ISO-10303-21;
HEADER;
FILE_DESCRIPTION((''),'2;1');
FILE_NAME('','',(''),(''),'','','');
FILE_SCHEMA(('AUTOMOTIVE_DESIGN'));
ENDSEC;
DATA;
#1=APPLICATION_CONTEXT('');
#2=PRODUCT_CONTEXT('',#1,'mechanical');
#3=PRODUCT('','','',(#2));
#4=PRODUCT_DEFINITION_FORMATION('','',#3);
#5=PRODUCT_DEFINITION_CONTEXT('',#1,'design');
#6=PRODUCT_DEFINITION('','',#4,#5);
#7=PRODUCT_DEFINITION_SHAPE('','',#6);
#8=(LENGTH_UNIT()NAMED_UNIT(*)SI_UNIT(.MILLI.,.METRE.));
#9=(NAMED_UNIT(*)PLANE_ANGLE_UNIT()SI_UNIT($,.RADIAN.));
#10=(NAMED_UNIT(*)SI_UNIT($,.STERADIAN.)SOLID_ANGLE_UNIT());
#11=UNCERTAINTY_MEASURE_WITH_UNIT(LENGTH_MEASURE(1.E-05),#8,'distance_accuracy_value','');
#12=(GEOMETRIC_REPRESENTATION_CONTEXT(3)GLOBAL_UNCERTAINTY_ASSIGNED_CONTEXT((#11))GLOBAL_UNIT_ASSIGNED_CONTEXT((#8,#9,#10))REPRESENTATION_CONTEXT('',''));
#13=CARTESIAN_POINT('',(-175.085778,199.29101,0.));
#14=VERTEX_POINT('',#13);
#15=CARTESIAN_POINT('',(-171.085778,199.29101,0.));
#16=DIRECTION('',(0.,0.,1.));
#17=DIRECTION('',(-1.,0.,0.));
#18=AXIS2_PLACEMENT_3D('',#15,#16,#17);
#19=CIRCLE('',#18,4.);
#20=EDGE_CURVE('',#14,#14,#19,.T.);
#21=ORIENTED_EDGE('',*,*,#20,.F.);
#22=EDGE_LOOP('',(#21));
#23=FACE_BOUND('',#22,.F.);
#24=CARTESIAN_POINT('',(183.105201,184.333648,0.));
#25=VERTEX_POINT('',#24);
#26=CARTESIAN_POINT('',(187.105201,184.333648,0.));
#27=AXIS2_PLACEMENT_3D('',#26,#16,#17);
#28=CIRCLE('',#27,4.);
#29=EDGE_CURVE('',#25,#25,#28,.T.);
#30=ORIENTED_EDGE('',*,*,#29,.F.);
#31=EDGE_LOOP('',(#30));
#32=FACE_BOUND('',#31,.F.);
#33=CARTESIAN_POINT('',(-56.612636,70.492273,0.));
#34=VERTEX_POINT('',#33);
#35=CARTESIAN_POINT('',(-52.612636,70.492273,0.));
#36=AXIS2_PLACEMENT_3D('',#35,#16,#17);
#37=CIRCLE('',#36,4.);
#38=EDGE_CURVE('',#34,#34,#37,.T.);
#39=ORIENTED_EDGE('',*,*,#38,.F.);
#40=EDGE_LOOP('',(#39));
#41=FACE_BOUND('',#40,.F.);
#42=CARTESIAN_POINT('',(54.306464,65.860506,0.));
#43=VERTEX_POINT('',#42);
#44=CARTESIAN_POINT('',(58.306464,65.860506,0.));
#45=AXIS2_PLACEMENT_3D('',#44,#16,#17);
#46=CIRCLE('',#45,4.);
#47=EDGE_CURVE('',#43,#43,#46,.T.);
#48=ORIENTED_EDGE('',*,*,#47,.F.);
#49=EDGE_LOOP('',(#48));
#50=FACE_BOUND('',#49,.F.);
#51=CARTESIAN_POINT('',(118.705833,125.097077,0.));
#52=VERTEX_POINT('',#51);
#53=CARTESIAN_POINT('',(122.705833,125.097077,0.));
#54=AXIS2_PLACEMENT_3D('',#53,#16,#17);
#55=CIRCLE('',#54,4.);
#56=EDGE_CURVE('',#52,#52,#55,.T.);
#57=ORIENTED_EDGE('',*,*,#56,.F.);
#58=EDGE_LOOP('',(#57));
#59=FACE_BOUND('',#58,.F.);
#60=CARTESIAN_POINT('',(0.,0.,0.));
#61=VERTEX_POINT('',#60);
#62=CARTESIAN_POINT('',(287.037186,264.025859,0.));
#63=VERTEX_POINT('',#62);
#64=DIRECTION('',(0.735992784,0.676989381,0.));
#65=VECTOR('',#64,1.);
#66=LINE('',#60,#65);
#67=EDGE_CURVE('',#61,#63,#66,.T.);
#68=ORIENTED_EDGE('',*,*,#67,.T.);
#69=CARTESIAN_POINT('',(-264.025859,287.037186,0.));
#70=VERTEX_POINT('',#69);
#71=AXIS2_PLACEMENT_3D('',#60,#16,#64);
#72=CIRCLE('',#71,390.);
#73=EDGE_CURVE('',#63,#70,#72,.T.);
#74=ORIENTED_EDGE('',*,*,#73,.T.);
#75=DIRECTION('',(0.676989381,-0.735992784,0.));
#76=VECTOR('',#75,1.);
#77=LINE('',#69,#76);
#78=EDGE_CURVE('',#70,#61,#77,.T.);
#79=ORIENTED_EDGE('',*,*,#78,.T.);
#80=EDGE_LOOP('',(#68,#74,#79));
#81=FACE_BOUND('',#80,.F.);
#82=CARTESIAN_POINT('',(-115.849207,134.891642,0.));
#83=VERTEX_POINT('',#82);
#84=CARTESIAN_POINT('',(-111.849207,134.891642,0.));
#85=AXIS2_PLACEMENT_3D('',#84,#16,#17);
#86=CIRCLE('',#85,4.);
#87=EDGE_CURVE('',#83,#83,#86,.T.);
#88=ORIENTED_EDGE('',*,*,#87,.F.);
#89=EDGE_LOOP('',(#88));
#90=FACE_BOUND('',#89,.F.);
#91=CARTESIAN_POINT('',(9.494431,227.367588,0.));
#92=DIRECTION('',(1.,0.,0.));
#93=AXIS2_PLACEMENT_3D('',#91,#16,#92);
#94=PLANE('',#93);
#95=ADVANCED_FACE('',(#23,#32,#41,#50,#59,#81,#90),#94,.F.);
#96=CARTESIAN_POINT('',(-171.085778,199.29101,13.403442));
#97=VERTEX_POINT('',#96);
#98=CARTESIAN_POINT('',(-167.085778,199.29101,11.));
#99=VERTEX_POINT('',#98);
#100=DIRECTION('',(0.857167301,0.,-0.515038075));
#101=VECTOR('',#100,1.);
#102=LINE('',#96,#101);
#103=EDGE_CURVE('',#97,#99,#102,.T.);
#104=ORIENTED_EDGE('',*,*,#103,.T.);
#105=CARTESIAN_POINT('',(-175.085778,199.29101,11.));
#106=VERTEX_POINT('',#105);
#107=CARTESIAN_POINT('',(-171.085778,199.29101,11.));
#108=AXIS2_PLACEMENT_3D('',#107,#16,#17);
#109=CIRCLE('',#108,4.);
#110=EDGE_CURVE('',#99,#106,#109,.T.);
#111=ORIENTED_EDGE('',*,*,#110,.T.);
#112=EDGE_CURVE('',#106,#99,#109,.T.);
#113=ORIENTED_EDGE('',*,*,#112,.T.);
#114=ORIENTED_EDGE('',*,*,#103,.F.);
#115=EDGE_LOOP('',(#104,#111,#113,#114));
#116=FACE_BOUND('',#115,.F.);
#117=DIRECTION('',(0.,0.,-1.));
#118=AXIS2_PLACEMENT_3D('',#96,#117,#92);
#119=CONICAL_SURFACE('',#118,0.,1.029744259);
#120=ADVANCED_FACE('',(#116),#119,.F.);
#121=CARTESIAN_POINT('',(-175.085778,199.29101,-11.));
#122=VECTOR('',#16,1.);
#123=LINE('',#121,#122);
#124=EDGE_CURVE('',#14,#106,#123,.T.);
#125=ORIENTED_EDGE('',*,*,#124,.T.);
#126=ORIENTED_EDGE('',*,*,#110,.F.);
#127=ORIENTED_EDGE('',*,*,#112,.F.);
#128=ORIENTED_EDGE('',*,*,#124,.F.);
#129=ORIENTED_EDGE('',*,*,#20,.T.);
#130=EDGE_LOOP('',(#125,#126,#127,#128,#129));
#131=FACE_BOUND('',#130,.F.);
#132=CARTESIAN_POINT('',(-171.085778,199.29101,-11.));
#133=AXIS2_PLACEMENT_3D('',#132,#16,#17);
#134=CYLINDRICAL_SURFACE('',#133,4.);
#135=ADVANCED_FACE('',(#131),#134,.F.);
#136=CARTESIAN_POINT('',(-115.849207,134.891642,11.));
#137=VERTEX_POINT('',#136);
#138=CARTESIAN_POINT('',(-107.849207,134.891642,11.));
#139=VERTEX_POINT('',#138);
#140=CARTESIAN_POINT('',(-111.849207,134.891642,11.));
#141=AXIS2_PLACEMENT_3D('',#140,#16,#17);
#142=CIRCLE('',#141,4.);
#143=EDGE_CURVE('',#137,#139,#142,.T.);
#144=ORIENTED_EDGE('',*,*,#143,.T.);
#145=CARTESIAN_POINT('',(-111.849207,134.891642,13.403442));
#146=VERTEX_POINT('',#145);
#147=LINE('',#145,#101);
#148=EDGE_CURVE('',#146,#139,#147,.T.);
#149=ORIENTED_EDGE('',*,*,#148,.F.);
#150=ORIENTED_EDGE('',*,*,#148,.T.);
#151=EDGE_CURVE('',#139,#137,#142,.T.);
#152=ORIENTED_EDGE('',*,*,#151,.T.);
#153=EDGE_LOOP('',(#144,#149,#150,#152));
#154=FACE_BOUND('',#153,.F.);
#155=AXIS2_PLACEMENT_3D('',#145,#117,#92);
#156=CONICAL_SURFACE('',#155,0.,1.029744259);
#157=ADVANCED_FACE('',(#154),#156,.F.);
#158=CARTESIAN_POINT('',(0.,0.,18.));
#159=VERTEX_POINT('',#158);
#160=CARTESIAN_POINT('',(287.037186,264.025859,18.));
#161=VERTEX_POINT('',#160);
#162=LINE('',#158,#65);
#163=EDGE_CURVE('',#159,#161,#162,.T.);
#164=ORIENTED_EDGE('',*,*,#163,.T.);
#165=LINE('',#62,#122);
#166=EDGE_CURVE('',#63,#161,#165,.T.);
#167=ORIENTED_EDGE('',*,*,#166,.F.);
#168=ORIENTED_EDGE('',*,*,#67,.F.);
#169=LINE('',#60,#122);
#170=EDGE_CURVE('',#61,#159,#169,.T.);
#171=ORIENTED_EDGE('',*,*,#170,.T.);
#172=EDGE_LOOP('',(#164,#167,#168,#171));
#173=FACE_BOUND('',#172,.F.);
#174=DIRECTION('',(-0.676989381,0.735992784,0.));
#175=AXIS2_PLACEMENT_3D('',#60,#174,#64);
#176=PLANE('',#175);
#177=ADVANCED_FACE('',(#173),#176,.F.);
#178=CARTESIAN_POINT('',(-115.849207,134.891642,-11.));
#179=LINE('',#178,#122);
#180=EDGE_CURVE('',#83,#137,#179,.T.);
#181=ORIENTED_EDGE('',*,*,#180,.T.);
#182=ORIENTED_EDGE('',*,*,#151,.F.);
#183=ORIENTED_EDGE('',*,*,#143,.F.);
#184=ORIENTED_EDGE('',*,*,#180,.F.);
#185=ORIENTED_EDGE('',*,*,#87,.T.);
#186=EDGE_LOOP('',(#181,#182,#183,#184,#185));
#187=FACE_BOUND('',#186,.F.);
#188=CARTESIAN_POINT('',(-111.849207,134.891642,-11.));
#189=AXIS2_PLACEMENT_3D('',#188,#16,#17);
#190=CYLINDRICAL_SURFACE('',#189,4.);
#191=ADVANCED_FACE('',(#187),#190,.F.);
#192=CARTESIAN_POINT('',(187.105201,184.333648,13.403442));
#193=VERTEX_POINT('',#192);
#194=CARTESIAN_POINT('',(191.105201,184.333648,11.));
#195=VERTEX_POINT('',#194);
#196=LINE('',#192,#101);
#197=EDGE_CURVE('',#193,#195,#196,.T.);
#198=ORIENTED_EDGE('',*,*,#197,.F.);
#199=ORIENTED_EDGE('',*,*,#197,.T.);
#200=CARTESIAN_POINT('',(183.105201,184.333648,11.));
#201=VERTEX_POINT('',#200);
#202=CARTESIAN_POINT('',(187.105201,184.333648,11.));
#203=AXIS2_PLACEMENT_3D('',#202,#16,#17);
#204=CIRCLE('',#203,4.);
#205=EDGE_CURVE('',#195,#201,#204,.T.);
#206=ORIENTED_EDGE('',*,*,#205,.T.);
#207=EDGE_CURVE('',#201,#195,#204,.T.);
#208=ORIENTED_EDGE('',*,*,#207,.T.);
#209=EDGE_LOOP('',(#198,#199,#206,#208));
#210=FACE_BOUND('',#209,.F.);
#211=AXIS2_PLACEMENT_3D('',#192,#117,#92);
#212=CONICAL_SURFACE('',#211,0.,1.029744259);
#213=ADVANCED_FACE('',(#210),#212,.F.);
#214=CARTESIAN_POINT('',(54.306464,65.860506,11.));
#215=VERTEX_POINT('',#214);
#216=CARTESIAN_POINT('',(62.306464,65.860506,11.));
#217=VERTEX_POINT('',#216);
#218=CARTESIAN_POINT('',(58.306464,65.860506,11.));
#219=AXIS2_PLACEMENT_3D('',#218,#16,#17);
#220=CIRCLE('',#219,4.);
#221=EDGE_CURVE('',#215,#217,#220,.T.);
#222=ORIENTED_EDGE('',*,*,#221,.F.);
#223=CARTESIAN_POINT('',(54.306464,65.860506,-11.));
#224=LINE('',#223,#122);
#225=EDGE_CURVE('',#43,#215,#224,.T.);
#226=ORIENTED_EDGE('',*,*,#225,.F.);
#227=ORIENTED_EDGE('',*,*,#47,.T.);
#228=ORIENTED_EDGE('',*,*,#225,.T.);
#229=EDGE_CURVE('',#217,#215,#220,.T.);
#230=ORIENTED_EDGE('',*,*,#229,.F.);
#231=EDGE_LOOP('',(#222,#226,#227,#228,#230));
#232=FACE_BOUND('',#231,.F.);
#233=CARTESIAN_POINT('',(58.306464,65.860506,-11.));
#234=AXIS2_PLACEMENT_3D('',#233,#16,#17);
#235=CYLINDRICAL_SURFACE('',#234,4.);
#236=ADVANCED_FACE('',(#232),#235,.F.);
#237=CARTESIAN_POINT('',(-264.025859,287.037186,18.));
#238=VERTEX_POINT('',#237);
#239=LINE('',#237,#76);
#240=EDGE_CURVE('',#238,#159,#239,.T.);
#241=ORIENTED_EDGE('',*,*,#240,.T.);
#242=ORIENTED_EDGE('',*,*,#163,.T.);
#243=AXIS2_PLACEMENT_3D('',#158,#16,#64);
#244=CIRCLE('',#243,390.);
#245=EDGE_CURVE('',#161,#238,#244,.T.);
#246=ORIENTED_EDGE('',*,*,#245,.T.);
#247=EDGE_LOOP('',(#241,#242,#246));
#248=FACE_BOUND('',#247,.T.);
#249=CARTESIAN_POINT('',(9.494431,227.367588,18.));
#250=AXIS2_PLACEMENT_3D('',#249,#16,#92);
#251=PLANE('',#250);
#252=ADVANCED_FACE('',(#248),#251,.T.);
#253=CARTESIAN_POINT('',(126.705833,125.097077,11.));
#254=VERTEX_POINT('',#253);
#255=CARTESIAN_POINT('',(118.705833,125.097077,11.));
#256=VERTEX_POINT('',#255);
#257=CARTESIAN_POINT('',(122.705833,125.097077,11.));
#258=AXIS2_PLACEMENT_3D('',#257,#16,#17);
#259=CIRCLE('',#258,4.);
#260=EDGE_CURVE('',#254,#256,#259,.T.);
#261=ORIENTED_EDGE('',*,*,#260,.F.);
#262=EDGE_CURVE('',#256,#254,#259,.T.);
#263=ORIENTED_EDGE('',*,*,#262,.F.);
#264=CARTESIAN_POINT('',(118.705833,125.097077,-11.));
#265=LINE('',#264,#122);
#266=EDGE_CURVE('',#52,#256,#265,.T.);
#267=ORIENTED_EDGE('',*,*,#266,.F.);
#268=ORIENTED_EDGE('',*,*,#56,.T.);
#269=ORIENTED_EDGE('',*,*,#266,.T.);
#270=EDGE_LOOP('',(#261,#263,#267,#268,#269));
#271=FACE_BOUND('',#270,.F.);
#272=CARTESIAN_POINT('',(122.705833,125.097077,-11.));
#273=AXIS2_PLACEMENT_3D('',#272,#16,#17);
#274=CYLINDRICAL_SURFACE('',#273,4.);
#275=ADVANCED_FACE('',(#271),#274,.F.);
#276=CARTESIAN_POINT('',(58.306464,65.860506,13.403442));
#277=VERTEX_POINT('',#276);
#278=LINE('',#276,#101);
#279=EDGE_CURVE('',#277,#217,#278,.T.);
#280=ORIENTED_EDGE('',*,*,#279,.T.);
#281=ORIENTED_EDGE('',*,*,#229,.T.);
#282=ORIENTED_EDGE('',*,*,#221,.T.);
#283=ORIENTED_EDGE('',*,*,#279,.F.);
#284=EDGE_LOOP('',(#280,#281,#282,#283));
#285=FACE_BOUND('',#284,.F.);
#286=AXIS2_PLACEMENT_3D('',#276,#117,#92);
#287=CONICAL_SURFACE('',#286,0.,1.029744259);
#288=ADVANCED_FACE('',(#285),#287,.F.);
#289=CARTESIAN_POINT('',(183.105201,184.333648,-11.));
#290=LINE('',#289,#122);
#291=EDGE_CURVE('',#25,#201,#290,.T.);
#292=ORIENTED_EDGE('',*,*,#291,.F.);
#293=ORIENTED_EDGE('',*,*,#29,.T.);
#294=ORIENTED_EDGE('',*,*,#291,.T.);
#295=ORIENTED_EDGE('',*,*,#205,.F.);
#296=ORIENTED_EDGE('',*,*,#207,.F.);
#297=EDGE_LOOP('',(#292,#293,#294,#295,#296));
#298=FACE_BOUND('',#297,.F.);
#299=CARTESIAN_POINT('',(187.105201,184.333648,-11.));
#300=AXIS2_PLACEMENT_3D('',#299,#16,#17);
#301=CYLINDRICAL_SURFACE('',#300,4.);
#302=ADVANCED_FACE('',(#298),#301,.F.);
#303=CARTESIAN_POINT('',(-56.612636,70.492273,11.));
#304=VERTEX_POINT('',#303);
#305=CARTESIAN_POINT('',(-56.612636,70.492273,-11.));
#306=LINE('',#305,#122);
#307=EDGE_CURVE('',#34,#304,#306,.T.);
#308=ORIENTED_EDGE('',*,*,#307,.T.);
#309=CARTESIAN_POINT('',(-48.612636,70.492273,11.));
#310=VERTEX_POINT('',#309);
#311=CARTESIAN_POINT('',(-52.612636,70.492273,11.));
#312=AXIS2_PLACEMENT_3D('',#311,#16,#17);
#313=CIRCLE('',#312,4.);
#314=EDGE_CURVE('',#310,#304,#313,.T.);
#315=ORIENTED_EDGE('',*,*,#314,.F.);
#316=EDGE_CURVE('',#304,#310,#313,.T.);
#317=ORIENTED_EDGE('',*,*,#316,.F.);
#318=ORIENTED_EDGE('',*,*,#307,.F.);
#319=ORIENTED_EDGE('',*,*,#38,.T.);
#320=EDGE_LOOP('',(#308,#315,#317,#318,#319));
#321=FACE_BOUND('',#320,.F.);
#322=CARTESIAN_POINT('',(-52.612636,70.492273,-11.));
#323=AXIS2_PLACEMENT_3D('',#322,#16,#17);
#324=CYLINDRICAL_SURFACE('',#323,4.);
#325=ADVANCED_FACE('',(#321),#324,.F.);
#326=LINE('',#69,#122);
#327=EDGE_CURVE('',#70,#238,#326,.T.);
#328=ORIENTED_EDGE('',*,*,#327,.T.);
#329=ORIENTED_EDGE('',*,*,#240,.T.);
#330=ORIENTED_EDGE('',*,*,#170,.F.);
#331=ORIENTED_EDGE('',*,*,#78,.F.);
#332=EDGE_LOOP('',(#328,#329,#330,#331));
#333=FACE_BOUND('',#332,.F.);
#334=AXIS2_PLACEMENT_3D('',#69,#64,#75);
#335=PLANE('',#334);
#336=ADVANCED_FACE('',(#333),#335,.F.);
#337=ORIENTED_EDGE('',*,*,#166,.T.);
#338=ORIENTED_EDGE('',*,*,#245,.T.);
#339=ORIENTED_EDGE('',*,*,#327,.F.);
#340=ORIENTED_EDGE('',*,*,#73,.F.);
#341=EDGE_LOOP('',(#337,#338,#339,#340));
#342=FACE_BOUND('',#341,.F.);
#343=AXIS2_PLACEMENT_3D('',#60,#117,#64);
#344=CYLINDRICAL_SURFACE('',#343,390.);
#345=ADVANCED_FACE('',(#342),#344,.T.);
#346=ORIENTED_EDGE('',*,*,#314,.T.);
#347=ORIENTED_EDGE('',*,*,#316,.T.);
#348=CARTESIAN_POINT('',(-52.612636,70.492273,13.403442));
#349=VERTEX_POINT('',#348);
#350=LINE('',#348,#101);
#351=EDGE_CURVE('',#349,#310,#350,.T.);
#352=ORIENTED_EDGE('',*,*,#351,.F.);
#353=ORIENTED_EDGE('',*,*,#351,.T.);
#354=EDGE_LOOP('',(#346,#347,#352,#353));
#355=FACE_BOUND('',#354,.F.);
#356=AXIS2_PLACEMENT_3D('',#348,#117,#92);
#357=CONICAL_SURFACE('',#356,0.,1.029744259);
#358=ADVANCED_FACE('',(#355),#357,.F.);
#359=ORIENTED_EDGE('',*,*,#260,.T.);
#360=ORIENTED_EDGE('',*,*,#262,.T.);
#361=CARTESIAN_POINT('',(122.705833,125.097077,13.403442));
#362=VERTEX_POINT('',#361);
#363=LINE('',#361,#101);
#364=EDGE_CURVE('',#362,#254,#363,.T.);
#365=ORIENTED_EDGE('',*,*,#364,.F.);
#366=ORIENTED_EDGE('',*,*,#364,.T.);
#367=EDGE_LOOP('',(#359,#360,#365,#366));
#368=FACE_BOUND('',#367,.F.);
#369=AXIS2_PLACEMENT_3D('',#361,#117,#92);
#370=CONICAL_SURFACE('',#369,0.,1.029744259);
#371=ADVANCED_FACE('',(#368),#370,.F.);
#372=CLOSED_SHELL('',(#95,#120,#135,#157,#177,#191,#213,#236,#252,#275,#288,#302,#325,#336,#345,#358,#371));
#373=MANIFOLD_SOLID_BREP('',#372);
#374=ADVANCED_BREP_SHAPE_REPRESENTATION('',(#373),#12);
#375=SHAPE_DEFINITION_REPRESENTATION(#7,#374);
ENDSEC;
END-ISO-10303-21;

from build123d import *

# Parameters (mm, degrees)
F1_DEPTH = 18
F3_D     = 8
F3_DEPTH = 11
F3_TIP   = 2.4034424761


# Not quite as in the source:
# - a feature names something its author has since deleted; it is built from what else it names


with BuildPart() as f1:
    # F0 (on Top) → F1 (new body)
    with BuildSketch(Plane.XY):
        with BuildLine():
            ThreePointArc((287.0371856283, 264.0258587081), (16.2714653094, 389.6604155116), (-264.0258587081, 287.0371856283))
            Line((-264.0258587081, 287.0371856283), (0, 0))
            Line((0, 0), (287.0371856283, 264.0258587081))
        make_face()
    extrude(amount=F1_DEPTH)

    # F3
    with Locations(Plane(origin=(0, 0, 0), x_dir=(1, 0, 0), z_dir=(0, 0, -1))):
        with Locations((-111.8492066751, -134.8916415726), (-52.612635811, -70.4922730022), (58.3064641387, -65.860505917), (122.7058327092, -125.097076781), (187.1052012796, -184.333647645), (-171.0857775391, -199.2910101431)):
            Hole(F3_D / 2, depth=F3_DEPTH)
            with Locations((0, 0, -(F3_DEPTH + F3_TIP / 2))):  # 118° drill point
                Cone(0, F3_D / 2, F3_TIP, mode=Mode.SUBTRACT)


solid = f1.part
